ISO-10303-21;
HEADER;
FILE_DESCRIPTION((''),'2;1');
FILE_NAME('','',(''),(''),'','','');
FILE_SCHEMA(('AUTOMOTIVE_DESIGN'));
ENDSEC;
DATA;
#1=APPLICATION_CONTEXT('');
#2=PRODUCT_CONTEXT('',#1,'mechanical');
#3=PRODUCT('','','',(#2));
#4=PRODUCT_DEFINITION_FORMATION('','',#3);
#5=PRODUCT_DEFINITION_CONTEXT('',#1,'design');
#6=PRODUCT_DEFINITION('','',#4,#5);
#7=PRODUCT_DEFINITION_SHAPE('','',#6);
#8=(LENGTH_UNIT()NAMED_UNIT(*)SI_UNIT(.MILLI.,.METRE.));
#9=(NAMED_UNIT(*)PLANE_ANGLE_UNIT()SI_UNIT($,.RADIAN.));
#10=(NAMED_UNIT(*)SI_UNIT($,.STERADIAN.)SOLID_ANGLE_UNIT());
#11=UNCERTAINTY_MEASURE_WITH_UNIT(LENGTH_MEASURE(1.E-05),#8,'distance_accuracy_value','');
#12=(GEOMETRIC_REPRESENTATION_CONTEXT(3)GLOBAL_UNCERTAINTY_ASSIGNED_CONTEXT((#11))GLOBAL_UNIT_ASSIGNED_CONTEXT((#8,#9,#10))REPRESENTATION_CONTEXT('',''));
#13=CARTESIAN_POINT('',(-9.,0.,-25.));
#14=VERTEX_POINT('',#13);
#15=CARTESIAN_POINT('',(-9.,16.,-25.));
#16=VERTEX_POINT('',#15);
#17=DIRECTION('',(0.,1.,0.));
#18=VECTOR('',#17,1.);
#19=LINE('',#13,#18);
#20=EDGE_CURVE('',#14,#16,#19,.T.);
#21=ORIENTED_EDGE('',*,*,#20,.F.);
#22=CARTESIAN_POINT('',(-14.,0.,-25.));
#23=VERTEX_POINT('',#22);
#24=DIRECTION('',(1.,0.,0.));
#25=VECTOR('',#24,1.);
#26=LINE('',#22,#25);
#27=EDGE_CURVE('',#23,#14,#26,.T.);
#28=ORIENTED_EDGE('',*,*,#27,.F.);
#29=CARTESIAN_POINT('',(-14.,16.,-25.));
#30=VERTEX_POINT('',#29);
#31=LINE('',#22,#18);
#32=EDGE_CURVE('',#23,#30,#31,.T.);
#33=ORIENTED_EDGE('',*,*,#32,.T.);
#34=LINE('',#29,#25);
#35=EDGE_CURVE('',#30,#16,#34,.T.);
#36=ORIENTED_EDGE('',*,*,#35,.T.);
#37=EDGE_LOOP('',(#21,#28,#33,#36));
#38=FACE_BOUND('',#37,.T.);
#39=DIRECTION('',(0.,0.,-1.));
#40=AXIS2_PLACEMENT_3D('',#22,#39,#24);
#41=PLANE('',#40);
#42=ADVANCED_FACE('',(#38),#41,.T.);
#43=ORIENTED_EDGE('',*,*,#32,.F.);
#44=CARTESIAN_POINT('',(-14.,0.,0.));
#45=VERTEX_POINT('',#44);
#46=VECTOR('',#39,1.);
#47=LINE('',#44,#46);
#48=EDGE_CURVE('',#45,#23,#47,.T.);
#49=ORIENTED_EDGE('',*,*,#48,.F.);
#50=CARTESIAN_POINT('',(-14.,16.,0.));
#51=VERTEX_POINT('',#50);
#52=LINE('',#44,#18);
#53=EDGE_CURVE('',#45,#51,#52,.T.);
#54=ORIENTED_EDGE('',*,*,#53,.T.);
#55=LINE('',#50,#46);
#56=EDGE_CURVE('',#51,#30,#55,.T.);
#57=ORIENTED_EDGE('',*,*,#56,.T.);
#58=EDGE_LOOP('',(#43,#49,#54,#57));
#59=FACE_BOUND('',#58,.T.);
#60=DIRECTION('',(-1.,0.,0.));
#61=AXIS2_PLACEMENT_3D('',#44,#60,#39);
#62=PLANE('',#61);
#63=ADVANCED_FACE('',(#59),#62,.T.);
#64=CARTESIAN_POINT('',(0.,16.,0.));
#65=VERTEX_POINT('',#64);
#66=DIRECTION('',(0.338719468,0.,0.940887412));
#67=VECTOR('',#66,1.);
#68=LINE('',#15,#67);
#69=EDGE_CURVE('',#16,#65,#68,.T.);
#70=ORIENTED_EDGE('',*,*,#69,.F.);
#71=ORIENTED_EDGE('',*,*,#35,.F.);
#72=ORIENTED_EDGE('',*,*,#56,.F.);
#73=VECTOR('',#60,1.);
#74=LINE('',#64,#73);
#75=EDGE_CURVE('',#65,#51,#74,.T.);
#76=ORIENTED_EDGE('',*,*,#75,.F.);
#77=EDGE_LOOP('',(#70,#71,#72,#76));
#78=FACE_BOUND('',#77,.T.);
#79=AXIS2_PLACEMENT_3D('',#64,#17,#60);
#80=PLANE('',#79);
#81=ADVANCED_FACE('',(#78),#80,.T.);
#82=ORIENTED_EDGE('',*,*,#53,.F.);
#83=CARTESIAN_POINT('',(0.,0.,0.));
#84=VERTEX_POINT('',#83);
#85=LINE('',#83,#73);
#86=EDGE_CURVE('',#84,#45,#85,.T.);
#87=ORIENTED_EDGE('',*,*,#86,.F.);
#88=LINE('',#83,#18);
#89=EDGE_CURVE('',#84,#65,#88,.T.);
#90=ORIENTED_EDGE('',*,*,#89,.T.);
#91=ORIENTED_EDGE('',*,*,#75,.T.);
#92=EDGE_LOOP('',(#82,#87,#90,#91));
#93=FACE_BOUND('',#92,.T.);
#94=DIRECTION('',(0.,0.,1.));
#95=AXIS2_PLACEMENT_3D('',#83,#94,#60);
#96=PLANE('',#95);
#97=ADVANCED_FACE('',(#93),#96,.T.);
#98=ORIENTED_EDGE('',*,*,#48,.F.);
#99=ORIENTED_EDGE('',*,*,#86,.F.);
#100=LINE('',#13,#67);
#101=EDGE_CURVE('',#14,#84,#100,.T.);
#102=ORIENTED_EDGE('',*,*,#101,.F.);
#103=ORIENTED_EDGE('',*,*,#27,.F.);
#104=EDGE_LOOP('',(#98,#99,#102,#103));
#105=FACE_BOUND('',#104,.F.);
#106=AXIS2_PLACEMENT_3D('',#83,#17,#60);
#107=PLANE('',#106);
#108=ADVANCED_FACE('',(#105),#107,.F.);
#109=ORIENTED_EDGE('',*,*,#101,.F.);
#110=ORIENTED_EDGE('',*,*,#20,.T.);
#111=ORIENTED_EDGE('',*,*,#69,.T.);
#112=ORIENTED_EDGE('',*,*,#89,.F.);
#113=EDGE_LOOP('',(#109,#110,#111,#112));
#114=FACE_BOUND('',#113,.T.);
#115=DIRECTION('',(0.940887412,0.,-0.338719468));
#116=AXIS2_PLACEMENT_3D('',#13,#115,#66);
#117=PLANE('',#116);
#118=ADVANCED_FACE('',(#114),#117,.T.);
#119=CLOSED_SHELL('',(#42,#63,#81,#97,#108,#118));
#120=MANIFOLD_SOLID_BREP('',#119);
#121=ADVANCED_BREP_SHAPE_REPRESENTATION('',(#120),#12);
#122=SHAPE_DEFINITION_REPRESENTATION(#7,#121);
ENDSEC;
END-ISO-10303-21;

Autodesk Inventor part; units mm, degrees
ref_plane "YZ Plane" through (0, 0, 0) normal (1, 0, 0) x (0, 1, 0)
ref_plane "XZ Plane" through (0, 0, 0) normal (0, 1, 0) x (-1, 0, 0)
ref_plane "XY Plane" through (0, 0, 0) normal (0, 0, 1) x (1, 0, 0)
sketch "Skizze3" plane through (0, 0, 0) normal (0, 1, 0) x (-1, 0, 0)
  line L0 (0, 0) -> (14, 0)
  line L1 (14, 0) -> (14, -25)
  line L2 (14, -25) -> (9, -25)
  line L3 (9, -25) -> (0, 0)
  dimension "d4" = 25
  dimension "d5" = 14
  dimension "d6" = 5
extrude "Extrusion3" add sketch "Skizze3" along normal blind 16
properties part number "BT100_trajan20_21"
